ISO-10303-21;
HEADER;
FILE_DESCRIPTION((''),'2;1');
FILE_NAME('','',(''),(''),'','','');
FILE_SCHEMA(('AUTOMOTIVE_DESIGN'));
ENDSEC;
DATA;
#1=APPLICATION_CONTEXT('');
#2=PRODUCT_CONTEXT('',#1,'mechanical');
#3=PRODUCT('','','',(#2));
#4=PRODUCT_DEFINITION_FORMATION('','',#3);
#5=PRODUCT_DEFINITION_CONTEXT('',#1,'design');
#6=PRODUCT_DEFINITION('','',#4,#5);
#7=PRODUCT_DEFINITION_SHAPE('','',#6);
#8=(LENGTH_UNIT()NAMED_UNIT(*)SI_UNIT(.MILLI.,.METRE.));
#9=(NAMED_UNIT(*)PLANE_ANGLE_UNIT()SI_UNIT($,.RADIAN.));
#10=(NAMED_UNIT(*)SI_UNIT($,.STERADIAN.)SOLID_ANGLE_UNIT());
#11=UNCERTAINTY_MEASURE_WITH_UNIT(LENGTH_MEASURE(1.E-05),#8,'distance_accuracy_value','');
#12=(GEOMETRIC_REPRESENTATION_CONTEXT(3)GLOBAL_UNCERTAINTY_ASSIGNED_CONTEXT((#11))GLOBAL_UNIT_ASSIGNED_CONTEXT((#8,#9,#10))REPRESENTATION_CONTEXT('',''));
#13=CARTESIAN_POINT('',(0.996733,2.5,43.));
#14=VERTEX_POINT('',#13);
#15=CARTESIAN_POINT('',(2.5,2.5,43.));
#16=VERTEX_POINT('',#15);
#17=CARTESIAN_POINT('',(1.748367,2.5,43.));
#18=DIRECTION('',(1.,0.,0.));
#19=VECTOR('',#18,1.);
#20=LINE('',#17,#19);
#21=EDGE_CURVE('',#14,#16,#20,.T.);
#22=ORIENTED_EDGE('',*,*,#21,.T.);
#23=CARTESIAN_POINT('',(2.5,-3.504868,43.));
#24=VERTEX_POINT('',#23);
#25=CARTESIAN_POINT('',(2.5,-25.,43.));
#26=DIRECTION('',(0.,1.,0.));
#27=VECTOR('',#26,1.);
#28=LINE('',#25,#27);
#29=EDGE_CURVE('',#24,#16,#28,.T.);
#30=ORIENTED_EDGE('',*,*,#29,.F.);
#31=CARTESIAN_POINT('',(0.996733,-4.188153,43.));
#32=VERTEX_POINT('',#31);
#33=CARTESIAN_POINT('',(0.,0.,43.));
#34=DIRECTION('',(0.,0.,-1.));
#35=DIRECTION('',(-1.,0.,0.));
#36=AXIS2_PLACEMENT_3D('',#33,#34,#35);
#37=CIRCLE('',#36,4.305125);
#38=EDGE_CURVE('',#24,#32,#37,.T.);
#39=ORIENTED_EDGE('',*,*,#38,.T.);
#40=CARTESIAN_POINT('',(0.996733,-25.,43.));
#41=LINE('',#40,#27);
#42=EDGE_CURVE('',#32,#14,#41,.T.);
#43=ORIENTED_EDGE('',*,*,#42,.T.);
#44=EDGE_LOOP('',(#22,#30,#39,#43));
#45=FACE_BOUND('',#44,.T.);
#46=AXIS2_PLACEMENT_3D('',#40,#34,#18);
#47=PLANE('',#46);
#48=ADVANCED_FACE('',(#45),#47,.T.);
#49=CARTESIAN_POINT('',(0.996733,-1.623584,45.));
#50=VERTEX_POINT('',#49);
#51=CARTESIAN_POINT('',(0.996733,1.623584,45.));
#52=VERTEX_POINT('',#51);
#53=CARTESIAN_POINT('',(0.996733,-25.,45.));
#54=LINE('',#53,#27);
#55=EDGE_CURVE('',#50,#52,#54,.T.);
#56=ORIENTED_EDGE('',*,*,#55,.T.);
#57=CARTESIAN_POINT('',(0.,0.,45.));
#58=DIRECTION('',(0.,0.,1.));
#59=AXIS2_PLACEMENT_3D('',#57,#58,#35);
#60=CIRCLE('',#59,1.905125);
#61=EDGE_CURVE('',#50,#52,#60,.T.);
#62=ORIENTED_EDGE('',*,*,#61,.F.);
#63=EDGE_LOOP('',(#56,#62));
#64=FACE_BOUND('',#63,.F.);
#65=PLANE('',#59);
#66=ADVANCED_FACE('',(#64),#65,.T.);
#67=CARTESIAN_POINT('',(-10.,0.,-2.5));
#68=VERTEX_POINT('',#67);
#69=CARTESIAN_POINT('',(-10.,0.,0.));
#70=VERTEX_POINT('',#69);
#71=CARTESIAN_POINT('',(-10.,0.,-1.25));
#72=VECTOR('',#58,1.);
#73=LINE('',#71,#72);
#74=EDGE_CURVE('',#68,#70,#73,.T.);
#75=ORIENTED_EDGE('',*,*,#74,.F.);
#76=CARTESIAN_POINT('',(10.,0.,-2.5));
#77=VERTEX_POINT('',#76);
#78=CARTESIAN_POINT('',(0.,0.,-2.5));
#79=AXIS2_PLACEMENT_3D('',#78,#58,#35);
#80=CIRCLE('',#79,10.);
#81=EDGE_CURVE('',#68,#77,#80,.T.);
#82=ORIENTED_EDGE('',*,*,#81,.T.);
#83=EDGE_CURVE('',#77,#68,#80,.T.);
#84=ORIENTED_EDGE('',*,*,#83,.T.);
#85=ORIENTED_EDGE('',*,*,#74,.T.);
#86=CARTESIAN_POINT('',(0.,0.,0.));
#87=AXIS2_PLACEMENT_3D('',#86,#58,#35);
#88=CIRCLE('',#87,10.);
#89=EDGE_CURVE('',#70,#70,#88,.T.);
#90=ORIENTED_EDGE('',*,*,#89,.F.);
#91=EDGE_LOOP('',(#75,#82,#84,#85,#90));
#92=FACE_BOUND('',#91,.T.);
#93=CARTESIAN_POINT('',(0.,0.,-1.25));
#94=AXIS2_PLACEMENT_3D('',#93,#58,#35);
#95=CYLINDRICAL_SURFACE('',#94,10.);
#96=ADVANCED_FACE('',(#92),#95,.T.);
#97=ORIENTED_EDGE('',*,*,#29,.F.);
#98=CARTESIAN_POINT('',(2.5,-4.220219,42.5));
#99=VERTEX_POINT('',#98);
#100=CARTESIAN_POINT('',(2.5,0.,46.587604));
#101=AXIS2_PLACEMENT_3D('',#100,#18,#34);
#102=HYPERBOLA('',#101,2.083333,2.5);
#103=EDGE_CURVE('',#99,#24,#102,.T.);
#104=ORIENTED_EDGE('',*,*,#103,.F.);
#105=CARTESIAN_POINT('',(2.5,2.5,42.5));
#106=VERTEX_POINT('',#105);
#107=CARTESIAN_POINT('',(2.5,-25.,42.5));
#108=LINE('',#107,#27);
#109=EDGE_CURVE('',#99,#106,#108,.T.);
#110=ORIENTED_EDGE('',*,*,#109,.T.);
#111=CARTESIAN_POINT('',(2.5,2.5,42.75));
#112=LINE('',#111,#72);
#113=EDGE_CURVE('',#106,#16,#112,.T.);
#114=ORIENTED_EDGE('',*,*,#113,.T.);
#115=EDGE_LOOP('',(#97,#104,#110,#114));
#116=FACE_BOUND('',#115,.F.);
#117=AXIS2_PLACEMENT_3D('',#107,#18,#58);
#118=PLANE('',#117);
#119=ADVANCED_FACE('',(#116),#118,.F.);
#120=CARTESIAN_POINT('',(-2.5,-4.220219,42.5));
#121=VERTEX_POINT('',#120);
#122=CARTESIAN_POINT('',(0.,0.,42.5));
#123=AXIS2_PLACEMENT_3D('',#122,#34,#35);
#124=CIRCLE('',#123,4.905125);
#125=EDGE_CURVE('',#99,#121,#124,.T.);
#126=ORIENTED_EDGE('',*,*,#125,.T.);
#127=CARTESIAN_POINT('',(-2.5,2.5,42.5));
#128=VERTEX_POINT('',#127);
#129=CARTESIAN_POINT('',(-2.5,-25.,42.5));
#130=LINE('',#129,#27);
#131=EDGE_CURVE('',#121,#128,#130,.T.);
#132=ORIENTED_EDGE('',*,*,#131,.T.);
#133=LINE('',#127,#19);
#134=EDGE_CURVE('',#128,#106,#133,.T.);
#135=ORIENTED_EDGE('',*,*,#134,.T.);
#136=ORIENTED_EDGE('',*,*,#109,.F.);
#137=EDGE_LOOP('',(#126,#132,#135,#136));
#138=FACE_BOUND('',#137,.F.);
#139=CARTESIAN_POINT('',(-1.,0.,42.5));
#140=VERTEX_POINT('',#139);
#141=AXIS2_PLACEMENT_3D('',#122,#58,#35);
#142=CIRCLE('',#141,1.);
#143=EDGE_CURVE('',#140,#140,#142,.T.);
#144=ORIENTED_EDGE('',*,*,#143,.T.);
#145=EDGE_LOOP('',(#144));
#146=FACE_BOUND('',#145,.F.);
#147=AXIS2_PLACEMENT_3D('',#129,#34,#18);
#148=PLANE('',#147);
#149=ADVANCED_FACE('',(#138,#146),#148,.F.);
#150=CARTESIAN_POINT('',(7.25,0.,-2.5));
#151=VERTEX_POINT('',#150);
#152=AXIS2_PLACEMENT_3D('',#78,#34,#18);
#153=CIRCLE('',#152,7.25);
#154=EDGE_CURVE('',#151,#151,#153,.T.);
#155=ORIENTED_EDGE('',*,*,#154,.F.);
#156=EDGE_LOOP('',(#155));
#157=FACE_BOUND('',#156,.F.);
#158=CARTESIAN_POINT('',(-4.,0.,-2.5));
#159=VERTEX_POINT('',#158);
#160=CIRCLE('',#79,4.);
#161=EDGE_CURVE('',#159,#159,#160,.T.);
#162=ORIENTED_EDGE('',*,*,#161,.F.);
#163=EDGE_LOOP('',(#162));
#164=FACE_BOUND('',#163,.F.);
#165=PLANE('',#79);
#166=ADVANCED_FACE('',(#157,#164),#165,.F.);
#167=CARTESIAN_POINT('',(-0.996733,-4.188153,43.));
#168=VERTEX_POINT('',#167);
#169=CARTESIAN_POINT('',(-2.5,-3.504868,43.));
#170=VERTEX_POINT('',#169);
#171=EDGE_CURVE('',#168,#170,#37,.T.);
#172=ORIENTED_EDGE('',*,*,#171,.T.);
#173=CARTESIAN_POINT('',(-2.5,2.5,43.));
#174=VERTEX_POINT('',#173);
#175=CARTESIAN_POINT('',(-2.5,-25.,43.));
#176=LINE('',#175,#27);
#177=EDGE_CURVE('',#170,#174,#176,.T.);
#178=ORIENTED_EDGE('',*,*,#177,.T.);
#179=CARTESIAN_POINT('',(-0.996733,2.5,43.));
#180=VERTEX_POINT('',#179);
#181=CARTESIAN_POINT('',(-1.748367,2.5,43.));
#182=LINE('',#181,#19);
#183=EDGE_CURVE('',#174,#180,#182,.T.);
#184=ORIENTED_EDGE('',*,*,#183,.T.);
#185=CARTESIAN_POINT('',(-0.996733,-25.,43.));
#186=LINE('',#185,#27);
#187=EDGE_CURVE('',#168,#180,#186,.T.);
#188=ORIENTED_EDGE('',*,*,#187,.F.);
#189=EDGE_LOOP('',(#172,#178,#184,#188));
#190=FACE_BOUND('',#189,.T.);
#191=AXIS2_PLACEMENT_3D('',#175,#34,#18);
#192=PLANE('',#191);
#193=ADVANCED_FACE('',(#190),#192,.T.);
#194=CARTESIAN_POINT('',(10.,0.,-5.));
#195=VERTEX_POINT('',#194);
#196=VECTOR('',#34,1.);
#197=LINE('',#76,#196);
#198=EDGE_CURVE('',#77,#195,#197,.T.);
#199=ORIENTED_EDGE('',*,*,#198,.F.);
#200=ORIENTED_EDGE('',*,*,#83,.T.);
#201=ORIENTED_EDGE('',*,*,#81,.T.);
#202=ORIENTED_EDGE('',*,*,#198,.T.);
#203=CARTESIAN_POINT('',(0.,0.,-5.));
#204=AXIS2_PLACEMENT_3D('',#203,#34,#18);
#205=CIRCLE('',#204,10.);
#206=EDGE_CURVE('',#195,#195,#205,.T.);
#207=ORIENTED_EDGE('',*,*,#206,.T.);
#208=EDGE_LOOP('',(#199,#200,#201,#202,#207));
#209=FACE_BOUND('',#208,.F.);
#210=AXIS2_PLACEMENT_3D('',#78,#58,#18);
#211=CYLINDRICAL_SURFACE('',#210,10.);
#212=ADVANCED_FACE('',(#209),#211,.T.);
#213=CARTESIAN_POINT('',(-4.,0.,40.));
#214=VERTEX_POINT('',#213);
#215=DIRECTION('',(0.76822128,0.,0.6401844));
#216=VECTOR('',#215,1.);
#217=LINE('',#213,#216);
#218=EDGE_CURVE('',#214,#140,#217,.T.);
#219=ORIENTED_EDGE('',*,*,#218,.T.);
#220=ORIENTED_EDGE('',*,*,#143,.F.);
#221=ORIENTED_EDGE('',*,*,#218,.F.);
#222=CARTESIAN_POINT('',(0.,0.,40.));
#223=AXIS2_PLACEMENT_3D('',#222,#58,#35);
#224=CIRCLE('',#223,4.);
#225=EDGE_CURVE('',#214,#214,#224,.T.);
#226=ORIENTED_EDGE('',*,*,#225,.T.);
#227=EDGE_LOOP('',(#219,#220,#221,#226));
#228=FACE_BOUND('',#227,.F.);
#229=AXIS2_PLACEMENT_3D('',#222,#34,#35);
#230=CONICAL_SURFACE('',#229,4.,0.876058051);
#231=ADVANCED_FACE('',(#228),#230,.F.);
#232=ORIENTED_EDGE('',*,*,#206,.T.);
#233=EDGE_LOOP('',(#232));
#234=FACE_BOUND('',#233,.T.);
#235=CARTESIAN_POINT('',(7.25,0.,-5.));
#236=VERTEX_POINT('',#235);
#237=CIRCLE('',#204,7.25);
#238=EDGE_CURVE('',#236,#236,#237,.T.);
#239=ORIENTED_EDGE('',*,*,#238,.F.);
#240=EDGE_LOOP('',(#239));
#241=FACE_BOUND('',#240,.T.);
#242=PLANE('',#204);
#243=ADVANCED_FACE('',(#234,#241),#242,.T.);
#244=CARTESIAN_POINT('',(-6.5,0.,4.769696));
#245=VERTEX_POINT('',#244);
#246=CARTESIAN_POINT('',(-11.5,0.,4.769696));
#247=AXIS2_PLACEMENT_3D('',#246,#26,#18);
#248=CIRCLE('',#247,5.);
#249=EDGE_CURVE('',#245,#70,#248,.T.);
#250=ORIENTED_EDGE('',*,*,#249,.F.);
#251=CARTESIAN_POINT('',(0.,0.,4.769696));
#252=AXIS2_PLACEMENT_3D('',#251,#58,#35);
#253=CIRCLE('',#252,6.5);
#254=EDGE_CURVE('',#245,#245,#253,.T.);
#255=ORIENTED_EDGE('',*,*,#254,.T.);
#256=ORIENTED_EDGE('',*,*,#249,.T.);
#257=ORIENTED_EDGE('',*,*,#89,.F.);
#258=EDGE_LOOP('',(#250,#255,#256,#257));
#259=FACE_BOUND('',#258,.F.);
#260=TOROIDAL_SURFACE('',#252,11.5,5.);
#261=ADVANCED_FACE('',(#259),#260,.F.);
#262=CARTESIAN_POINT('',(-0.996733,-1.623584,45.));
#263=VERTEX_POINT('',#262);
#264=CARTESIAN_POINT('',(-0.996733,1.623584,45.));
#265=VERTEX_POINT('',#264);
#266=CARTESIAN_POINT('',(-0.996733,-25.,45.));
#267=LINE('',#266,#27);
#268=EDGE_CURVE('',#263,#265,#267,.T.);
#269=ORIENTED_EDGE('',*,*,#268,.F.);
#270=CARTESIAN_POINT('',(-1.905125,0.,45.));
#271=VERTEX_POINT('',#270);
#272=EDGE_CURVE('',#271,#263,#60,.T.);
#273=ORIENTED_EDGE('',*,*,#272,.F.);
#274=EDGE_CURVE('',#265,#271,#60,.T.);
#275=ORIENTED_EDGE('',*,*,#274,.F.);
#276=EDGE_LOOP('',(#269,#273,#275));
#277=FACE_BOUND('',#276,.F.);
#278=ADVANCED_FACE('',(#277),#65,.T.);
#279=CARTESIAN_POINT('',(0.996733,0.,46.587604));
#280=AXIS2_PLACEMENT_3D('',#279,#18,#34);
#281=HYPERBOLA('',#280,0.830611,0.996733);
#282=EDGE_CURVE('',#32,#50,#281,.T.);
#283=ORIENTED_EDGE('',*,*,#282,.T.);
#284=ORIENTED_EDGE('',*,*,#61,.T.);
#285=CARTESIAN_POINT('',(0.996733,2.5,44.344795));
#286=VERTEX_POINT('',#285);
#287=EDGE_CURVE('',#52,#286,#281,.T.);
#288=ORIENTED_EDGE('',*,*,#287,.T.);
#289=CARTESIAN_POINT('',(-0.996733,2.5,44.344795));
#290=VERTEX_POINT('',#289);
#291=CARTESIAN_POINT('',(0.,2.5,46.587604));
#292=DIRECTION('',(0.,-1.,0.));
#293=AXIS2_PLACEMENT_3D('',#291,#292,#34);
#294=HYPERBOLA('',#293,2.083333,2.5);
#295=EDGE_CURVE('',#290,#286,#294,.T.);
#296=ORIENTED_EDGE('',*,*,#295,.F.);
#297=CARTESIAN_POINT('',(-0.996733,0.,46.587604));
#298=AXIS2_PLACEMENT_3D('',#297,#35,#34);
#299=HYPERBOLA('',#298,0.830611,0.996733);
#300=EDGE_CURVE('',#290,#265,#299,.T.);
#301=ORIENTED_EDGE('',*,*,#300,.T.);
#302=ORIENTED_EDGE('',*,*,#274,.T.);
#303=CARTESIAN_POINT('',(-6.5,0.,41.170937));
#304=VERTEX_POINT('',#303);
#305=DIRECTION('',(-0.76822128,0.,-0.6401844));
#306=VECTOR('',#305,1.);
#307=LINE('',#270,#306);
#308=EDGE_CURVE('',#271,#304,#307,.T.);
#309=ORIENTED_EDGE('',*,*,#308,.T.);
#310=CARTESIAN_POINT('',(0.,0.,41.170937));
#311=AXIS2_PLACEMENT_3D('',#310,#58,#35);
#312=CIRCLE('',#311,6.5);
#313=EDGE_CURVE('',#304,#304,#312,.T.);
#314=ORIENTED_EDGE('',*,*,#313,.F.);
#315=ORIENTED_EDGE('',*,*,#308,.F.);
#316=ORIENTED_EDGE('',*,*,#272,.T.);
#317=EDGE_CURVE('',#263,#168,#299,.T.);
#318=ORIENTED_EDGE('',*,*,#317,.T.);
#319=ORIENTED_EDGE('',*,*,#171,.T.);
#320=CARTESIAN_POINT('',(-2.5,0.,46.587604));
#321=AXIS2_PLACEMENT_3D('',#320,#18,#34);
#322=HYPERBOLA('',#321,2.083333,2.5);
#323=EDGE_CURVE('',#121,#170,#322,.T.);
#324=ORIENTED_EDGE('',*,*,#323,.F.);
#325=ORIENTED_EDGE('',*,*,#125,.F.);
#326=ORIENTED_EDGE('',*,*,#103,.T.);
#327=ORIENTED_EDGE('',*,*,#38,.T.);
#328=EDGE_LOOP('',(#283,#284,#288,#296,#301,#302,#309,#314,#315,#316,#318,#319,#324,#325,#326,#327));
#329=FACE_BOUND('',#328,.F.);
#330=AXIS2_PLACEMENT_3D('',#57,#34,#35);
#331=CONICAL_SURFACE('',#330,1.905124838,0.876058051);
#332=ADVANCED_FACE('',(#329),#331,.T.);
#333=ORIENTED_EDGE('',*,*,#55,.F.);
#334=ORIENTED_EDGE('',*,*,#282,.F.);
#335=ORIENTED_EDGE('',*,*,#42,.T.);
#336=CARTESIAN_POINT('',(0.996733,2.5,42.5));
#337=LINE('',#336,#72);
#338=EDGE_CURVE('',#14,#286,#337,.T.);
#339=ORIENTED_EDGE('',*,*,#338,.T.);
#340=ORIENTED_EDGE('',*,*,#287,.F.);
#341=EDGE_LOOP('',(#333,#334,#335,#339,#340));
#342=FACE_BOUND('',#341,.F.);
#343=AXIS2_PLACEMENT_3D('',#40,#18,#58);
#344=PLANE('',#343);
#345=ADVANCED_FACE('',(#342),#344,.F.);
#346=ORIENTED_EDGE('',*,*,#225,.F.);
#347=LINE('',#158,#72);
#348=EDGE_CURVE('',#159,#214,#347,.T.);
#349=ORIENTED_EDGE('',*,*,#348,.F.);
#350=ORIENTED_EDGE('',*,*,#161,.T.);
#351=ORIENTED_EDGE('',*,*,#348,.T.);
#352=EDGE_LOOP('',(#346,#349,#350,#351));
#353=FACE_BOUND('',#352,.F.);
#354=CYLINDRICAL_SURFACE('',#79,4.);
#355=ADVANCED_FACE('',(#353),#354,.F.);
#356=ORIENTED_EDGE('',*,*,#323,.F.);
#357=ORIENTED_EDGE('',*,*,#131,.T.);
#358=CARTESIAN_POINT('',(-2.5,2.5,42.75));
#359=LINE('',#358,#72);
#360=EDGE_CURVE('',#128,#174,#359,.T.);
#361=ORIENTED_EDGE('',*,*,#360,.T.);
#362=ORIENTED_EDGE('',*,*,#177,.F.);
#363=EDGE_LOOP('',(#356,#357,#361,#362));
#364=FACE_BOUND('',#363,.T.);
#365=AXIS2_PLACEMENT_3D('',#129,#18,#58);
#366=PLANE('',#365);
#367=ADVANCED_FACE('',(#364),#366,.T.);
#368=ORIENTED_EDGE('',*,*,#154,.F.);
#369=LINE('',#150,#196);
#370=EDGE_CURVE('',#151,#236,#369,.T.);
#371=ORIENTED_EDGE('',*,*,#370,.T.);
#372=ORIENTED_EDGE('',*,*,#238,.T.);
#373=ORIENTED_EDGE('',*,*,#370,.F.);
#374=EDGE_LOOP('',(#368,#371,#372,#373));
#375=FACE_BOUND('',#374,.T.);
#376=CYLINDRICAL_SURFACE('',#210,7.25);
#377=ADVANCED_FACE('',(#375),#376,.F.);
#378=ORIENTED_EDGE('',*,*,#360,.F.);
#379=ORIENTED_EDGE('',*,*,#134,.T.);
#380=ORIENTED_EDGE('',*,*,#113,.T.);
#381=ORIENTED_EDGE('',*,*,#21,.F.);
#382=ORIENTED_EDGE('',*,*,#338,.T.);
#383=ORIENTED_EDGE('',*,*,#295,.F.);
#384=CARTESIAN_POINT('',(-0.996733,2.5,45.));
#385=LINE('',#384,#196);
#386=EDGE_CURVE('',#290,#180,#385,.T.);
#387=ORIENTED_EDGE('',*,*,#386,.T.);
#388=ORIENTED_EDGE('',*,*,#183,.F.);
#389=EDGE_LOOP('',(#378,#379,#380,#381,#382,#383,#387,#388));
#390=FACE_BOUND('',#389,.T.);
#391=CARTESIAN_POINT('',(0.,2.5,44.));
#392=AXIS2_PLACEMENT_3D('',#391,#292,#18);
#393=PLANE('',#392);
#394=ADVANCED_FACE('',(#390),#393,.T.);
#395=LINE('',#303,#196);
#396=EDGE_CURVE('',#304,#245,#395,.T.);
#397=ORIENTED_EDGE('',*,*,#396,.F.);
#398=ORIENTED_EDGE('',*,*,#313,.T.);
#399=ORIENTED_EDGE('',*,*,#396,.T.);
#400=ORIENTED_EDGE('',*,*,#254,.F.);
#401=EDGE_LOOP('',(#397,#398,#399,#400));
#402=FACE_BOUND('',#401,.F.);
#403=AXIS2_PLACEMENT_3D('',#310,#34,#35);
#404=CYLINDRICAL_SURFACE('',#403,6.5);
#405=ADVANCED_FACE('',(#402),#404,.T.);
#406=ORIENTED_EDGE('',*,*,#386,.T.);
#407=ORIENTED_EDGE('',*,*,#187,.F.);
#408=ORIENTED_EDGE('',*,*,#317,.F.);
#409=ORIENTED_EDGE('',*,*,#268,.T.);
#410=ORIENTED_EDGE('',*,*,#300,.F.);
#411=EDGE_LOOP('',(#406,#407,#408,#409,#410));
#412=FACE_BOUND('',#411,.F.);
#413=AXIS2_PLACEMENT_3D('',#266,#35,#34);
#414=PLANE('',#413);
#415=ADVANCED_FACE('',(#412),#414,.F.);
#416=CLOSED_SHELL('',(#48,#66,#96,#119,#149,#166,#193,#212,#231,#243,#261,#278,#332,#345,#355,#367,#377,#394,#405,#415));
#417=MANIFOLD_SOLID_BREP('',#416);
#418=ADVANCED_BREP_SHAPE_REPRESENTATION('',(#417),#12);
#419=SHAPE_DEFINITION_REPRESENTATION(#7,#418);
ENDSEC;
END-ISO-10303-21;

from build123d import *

# Parameters (mm, degrees)
F0_W     = 2.5
F0_H     = 2.5
F0_W_2   = 3.5
F3_W     = 1.9934664722
F3_H     = 2
F3_H_2   = 0.5
F3_W_2   = 1.5032667639
F4_DEPTH = 27.5
F5_R     = 10
F5_R_2   = 7.25
F6_DEPTH = 2.5


# Not quite as in the source:
# - a fillet or chamfer that OpenCascade refuses, or shapes differently, is made with other operations: its cross-section is extruded or revolved along the edge and cut away or added


with BuildPart() as f1:
    # F0 (on Front) → F1 (revolve)
    with BuildSketch(Plane.XZ):
        Polygon((-6.5, 0), (-4, 0), (-4, 40), (-1, 42.5), (0, 42.5), (0, 45), (-1.905124838, 45), (-6.5, 41.170937365), align=None)
        with Locations((-5.25, -1.25)):
            Rectangle(F0_W, F0_H)
        with Locations((-8.25, -1.25)):
            Rectangle(F0_W_2, F0_H)
    revolve(axis=Axis((0, 0, 20), (0, 0, 1)))

    # F3 (on offset) → F4 (cut)
    with BuildSketch(Plane.XZ.offset(25)):
        with Locations((0, 44)):
            Rectangle(F3_W, F3_H)
        with Locations((0, 42.75)):
            Rectangle(F3_W, F3_H_2)
        with Locations((-1.7483666181, 42.75)):
            Rectangle(F3_W_2, F3_H_2)
        with Locations((1.7483666181, 42.75)):
            Rectangle(F3_W_2, F3_H_2)
    extrude(amount=-F4_DEPTH, mode=Mode.SUBTRACT)

    # F5 (on face) → F6 (join)
    with BuildSketch(Plane(origin=(0, 0, -2.5), x_dir=(1, 0, 0), z_dir=(0, 0, -1))):
        Circle(F5_R)
        Circle(F5_R_2, mode=Mode.SUBTRACT)
    extrude(amount=F6_DEPTH)

    # F7: fillet of radius 5 on 1 edges, made by hand

    # F7_s1 → F7_t2 (revolve)
    with BuildSketch(Plane.XZ):
        with BuildLine():
            ThreePointArc((-6.5, 4.7696960071), (-7.4688711259, 1.8116561155), (-10, 0))
            Line((-10, 0), (-6.5, 0))
            Line((-6.5, 0), (-6.5, 4.7696960071))
        make_face()
    revolve(axis=Axis((0, 0, 0), (0, 0, 1)))


solid = f1.part
